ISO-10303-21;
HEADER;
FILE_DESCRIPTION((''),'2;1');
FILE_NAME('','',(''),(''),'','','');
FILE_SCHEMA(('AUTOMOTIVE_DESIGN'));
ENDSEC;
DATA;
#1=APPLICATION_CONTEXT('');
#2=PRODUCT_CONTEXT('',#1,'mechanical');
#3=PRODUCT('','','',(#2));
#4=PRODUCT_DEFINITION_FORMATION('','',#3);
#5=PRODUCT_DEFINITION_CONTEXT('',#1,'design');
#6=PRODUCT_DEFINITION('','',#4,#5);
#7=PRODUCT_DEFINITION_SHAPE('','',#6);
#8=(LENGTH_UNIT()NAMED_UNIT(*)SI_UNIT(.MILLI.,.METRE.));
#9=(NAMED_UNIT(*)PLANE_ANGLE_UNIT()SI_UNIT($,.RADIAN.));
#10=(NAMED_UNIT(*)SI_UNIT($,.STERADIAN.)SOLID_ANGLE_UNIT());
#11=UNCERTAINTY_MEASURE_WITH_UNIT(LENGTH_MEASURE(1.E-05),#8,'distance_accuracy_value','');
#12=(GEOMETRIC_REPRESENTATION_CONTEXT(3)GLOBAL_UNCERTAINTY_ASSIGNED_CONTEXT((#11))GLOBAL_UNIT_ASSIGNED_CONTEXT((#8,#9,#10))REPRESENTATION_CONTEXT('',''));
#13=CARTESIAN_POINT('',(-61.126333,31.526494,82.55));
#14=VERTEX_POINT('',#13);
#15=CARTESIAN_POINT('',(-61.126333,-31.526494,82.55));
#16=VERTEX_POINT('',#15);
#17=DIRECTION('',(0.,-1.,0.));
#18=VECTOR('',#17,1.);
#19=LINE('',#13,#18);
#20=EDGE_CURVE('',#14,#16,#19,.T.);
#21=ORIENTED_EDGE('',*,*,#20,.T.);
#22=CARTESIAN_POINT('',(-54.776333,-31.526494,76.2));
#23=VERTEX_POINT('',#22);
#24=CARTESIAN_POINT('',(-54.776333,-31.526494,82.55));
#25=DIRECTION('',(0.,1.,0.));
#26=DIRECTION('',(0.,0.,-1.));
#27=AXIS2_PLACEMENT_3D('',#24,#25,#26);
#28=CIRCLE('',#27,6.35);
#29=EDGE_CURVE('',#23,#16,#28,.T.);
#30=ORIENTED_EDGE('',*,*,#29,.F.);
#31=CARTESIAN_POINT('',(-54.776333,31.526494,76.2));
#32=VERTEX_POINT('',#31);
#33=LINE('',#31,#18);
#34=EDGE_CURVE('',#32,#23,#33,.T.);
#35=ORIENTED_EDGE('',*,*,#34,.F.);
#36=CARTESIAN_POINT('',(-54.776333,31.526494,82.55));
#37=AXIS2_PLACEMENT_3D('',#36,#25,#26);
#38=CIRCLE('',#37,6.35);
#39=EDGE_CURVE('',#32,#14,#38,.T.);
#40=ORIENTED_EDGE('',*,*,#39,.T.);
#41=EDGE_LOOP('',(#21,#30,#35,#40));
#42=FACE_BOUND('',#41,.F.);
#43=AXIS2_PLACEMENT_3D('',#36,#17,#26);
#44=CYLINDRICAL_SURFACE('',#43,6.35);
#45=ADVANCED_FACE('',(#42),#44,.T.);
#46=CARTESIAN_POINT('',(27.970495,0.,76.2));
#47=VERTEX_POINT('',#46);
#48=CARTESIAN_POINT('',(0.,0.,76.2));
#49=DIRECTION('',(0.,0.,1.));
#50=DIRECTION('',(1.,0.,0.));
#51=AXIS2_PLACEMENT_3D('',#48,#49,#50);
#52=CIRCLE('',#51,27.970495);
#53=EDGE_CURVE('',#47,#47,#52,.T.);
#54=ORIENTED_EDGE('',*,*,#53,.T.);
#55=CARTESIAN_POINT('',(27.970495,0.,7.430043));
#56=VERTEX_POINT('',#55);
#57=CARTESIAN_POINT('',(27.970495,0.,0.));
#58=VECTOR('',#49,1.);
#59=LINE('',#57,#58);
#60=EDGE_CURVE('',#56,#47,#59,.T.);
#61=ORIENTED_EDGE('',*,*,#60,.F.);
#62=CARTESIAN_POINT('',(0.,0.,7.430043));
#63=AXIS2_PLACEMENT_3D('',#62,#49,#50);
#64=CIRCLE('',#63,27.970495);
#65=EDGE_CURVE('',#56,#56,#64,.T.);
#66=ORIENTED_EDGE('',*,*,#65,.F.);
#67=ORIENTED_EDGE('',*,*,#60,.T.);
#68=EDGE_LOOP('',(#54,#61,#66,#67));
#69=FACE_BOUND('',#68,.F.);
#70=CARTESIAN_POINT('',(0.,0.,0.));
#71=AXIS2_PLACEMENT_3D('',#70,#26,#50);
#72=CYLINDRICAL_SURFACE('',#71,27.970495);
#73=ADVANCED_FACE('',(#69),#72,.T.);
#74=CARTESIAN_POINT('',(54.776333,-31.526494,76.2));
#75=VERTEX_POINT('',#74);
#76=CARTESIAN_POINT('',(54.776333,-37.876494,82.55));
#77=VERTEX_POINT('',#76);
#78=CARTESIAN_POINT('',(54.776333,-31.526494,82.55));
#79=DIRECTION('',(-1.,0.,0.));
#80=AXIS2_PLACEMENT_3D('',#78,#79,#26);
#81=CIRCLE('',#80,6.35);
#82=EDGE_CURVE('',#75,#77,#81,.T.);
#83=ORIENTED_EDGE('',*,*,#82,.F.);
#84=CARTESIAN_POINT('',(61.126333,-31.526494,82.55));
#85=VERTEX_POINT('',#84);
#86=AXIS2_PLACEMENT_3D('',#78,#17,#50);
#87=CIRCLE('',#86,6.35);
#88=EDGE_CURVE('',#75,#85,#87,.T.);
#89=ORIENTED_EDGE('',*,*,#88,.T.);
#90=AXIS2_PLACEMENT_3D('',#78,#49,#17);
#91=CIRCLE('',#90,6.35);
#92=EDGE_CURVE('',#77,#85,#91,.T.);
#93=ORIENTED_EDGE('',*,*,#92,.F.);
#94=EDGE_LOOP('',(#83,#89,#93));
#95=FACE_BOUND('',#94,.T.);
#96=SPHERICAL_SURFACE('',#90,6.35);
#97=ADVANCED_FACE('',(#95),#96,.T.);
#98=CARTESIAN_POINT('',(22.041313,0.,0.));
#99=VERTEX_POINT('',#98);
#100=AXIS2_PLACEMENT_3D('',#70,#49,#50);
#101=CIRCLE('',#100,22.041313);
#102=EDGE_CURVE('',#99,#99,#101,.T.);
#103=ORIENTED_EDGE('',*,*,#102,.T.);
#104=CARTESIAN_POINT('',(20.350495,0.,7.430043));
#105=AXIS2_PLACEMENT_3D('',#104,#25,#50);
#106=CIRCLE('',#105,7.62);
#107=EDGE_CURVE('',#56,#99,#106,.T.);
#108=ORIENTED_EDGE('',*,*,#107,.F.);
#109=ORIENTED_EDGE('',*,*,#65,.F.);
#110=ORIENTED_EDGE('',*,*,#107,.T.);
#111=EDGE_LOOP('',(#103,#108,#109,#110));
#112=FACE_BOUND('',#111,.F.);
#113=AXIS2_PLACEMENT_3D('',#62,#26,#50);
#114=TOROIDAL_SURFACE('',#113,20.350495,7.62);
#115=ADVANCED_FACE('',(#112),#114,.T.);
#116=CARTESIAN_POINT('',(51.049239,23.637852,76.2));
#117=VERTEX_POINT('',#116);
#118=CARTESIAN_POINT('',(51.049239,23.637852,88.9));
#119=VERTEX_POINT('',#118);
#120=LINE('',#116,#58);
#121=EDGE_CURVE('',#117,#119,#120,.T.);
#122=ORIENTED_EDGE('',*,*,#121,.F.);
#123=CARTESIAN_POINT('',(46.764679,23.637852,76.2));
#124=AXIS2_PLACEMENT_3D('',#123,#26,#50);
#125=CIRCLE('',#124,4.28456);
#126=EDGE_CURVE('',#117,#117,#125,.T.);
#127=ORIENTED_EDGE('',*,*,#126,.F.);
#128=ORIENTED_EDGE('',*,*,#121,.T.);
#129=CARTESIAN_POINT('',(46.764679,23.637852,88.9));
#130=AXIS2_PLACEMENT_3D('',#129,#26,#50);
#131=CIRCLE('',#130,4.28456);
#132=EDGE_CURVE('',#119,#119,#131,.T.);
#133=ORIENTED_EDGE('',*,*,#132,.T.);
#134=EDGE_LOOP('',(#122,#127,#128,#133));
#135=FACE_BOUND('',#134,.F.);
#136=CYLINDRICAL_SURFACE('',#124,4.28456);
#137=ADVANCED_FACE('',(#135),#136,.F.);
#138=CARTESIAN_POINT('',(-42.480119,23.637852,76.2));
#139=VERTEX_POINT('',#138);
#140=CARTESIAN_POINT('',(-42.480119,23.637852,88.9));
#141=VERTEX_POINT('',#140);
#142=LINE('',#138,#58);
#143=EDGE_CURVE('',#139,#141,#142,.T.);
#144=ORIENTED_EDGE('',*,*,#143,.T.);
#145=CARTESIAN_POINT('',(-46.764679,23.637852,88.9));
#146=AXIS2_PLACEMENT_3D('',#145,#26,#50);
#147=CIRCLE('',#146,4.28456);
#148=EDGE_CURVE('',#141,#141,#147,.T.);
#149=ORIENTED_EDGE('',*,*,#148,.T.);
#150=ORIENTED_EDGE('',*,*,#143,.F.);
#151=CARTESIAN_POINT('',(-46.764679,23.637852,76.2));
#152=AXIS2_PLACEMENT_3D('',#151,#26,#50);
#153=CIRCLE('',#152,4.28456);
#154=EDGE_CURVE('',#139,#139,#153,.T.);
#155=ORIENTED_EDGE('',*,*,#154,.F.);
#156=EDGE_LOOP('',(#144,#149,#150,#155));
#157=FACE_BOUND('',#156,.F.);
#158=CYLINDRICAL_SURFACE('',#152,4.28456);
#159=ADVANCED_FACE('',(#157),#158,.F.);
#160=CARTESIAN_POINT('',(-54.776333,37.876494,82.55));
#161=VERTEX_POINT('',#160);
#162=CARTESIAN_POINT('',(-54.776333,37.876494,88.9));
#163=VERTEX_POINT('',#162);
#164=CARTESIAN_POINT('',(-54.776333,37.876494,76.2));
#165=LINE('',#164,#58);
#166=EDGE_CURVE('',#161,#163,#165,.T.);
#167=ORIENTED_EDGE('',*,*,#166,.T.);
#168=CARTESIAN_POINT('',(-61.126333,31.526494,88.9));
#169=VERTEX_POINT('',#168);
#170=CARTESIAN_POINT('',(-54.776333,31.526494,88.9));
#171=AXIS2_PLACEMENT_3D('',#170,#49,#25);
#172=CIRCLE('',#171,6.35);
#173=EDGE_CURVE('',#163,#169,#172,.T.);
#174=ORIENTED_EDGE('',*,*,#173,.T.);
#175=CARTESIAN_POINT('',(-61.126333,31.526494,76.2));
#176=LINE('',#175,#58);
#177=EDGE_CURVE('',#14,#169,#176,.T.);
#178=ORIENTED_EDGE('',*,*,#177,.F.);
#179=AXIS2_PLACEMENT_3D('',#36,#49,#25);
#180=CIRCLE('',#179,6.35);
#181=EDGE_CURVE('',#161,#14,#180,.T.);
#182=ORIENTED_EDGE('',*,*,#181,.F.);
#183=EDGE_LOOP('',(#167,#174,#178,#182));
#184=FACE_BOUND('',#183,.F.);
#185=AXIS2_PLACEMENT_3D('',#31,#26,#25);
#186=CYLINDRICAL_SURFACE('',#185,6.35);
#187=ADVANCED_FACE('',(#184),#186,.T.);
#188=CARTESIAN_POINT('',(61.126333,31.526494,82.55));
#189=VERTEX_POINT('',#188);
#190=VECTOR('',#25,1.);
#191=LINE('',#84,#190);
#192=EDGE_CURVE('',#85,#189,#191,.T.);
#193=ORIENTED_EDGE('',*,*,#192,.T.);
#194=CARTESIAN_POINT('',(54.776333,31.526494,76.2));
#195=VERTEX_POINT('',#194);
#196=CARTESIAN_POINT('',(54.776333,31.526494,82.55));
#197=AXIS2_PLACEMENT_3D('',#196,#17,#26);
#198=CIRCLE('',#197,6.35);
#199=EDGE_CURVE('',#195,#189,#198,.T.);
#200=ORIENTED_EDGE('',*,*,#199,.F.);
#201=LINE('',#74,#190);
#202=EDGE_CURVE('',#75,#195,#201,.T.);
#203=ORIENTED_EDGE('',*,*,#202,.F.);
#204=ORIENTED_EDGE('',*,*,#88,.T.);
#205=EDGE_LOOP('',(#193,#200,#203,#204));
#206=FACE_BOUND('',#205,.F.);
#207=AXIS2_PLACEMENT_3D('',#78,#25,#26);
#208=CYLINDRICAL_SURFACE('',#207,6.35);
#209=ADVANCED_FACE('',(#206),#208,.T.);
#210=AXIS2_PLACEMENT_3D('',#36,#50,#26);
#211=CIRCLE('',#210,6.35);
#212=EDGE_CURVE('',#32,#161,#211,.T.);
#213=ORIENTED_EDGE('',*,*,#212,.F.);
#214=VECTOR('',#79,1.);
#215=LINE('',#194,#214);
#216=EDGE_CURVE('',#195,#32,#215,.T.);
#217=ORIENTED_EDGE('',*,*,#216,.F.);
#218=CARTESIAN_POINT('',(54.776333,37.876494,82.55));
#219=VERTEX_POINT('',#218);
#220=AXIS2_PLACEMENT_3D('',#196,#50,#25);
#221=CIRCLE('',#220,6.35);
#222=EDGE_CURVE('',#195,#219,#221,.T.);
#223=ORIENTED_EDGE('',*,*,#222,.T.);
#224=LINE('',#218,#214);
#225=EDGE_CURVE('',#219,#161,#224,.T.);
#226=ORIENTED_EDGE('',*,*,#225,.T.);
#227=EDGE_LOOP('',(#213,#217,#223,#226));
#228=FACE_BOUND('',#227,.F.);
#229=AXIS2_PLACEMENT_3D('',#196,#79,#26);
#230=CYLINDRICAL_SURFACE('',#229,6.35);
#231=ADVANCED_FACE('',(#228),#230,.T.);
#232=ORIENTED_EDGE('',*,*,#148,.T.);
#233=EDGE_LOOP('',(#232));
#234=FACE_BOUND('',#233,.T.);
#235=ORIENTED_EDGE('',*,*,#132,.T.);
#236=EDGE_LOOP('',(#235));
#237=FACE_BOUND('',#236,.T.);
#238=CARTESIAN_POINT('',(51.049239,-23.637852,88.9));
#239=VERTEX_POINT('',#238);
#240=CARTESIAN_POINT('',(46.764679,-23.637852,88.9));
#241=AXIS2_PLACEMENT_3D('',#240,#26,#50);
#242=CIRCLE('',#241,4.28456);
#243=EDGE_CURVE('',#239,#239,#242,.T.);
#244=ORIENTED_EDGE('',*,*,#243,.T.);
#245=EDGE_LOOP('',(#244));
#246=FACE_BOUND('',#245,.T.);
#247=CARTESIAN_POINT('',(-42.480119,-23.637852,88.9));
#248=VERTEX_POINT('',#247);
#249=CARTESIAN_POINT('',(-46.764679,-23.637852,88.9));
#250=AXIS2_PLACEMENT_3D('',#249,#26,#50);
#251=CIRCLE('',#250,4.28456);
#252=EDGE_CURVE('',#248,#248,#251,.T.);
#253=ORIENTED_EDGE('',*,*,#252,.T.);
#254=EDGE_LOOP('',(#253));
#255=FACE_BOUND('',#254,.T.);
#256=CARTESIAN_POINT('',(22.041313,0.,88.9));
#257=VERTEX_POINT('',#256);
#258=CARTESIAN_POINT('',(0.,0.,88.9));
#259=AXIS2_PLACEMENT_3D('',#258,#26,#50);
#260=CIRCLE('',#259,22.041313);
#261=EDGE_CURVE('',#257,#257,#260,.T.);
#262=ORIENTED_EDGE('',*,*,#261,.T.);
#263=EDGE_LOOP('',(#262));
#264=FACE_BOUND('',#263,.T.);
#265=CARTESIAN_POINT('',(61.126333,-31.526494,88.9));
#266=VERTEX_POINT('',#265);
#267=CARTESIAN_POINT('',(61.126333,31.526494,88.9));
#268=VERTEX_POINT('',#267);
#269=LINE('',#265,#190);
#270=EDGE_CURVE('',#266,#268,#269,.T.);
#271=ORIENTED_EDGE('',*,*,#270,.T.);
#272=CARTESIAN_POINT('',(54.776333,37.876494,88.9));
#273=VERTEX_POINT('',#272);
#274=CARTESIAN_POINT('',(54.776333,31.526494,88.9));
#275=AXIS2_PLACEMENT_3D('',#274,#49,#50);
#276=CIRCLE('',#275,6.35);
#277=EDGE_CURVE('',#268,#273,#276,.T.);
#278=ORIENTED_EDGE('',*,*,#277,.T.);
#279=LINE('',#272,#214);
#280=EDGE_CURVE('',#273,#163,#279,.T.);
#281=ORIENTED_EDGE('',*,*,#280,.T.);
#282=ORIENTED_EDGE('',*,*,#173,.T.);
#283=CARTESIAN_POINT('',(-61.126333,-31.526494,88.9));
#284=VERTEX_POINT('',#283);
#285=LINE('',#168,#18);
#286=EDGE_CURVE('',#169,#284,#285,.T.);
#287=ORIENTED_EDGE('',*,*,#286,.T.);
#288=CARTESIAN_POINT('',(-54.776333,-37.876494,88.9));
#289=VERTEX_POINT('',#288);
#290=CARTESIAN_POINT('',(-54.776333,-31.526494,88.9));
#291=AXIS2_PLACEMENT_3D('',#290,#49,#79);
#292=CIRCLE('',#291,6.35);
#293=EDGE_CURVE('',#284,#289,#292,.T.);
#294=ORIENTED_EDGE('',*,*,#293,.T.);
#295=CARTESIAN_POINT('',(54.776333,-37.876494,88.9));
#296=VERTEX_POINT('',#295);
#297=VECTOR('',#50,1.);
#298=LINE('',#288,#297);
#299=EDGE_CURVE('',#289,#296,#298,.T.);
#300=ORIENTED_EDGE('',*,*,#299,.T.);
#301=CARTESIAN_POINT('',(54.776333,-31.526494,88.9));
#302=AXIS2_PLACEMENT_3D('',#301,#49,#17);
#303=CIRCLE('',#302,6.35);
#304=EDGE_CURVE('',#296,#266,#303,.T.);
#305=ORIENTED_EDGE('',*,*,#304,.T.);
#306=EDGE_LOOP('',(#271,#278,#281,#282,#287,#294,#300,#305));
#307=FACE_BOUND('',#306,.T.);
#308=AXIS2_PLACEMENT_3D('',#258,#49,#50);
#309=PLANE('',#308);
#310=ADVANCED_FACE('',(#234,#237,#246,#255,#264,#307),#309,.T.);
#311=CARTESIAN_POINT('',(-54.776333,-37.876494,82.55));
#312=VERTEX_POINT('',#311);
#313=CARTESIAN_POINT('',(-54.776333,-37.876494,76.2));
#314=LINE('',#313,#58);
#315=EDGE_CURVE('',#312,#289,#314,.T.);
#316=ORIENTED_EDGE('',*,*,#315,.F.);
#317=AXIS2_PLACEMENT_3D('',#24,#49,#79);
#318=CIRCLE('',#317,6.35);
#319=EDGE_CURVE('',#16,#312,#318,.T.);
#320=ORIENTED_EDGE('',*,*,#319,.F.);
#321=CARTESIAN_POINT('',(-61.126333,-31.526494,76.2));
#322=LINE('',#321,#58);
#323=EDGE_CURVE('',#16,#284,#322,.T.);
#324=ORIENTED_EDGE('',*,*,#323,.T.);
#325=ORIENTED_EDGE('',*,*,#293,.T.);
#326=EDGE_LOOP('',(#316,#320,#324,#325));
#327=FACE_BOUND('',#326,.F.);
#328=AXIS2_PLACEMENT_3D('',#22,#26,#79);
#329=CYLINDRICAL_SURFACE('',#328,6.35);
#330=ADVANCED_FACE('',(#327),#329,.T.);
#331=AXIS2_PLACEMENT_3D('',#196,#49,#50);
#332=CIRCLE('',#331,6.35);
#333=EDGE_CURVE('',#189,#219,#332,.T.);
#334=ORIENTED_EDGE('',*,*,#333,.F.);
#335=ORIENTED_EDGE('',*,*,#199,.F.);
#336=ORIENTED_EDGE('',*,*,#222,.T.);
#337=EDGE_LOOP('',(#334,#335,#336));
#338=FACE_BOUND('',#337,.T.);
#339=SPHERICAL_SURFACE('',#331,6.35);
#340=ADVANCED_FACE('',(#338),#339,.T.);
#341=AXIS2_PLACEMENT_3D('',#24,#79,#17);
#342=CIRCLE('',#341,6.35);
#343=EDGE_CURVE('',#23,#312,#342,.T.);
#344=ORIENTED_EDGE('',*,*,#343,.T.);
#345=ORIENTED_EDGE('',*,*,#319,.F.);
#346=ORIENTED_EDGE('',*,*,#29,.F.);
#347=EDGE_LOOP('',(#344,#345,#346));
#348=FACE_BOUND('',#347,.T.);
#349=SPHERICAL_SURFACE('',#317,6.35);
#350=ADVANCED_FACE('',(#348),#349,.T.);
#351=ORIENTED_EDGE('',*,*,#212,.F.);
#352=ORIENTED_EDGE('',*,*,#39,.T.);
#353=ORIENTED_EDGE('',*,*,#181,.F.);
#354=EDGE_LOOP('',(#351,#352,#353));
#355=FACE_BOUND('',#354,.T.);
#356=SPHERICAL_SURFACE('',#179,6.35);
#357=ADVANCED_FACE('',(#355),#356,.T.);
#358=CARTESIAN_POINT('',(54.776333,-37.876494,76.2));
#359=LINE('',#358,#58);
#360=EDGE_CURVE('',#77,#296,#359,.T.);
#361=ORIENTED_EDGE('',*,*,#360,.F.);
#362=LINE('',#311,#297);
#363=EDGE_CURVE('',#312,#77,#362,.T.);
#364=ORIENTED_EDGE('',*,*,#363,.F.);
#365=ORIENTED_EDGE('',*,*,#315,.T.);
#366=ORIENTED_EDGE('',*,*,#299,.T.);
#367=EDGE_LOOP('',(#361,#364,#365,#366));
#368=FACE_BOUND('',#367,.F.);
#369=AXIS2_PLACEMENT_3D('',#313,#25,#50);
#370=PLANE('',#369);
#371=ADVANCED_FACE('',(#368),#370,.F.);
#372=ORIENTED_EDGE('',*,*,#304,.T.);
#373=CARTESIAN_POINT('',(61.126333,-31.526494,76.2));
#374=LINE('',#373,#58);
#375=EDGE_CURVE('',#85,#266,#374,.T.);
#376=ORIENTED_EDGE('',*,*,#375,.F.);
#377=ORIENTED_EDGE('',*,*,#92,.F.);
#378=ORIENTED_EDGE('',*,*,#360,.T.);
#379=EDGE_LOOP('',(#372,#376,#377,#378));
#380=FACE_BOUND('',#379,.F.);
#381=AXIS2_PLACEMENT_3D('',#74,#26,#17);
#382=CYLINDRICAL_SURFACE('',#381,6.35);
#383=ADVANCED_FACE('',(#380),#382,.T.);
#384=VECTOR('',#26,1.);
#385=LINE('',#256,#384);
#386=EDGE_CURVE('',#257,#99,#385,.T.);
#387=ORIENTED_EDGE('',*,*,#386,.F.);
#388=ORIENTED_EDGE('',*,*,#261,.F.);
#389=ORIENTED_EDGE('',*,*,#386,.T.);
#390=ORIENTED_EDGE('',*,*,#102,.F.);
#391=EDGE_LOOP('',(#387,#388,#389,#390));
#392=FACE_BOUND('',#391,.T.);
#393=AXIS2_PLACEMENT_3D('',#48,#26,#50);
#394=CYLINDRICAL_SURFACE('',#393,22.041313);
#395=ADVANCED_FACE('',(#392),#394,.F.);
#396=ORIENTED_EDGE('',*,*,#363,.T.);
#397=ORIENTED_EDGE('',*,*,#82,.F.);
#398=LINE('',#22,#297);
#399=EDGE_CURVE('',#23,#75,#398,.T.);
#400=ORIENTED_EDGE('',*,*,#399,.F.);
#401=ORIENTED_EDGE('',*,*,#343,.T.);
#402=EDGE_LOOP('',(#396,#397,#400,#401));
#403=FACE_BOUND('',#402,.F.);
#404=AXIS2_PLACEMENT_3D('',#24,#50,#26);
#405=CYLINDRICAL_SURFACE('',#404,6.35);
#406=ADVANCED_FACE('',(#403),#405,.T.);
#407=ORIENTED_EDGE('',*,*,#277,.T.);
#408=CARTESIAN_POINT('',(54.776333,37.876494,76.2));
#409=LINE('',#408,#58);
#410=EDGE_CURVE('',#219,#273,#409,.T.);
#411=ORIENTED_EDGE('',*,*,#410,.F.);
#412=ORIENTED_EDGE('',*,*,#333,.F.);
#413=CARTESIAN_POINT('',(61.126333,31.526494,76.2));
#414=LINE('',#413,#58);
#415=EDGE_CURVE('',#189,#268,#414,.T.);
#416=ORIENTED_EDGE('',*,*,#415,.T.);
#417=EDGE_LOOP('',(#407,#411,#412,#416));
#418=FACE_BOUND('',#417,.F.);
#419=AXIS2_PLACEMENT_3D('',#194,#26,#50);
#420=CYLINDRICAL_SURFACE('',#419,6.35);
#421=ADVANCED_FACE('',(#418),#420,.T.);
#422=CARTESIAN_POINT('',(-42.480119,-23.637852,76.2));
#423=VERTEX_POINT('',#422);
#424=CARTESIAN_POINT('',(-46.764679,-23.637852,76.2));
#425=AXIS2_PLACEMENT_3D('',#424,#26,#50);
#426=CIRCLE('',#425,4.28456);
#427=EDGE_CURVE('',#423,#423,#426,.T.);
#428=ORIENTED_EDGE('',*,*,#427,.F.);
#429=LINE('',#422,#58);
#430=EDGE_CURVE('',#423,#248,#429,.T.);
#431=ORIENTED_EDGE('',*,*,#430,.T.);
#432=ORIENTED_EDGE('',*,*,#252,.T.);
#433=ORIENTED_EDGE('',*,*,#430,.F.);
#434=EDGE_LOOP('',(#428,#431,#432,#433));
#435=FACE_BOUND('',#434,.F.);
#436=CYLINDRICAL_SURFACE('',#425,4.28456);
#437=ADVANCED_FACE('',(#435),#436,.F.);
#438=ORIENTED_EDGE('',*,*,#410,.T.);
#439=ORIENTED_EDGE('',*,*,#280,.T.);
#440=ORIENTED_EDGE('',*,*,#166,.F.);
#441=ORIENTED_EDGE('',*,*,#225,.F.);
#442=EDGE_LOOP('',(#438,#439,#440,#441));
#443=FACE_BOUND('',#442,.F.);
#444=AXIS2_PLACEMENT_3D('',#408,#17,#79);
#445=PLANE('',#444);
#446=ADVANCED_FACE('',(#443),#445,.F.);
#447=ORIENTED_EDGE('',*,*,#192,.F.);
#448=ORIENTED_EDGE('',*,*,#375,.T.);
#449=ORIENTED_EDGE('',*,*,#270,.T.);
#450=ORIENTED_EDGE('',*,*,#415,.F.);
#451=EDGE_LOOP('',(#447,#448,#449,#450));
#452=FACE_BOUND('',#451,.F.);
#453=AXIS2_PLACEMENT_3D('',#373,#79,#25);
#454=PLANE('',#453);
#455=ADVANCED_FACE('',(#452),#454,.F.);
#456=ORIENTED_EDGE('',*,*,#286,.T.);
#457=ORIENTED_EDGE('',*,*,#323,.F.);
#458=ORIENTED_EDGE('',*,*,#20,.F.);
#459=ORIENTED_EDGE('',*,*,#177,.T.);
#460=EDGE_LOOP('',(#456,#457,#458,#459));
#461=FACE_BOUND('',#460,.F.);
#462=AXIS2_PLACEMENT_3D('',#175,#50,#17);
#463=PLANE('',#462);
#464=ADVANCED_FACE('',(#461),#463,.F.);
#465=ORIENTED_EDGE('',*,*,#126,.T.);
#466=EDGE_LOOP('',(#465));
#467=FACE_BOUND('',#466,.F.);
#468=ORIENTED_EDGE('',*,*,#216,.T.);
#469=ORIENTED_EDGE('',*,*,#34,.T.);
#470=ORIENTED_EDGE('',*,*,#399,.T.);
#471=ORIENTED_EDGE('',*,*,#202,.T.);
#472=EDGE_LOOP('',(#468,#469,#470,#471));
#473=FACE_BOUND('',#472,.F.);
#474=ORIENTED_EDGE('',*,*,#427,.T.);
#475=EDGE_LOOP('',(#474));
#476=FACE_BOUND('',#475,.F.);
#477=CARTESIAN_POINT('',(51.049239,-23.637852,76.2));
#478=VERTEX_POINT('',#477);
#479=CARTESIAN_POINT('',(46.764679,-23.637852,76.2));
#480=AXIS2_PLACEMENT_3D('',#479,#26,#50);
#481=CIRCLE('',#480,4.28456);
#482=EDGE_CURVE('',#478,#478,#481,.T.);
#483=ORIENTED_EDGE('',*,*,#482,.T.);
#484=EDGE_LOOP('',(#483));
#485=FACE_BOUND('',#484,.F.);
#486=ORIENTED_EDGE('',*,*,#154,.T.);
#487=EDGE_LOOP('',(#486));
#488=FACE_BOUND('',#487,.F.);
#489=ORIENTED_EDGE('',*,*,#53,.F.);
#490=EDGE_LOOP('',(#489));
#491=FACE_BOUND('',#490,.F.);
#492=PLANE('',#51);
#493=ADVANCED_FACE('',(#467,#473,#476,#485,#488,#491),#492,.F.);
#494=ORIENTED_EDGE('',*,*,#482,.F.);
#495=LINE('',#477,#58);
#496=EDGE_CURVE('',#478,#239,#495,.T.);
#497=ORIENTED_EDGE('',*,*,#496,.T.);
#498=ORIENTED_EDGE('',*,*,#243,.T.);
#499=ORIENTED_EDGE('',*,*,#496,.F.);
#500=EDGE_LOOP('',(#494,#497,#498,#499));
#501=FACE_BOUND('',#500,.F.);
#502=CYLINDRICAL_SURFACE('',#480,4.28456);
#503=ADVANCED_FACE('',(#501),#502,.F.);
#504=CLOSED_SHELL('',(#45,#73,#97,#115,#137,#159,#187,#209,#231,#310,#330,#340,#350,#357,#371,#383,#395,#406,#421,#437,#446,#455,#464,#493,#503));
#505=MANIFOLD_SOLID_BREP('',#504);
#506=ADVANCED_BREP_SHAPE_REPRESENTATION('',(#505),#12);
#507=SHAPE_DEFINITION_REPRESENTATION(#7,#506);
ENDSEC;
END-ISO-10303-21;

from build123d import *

# Parameters (mm, degrees)
F0_R     = 27.9704951592
F0_R_2   = 22.0413133634
F1_DEPTH = 76.2
F3_DEPTH = 12.7
F5_R     = 6.35
F6_R     = 4.2845599963
F7_DEPTH = 25.4
F8_DEPTH = 25.4


# Not quite as in the source:
# - a fillet or chamfer that OpenCascade refuses, or shapes differently, is made with other operations: its cross-section is extruded or revolved along the edge and cut away or added


with BuildPart() as f1:
    # F0 (on Top) → F1 (new body)
    with BuildSketch(Plane.XY):
        Circle(F0_R)
        Circle(F0_R_2, mode=Mode.SUBTRACT)
    extrude(amount=F1_DEPTH)

    # F2 (on face) → F3 (join)
    with BuildSketch(Plane.XY.offset(76.2)):
        with BuildLine():
            Line((-54.7763327301, -37.8764942288), (54.7763327301, -37.8764942288))
            ThreePointArc((54.7763327301, -37.8764942288), (59.2664607906, -36.0166222894), (61.1263327301, -31.5264942288))
            Line((61.1263327301, -31.5264942288), (61.1263327301, 31.5264942288))
            ThreePointArc((61.1263327301, 31.5264942288), (59.2664607906, 36.0166222894), (54.7763327301, 37.8764942288))
            Line((54.7763327301, 37.8764942288), (-54.7763327301, 37.8764942288))
            ThreePointArc((-54.7763327301, 37.8764942288), (-59.2664607906, 36.0166222894), (-61.1263327301, 31.5264942288))
            Line((-61.1263327301, 31.5264942288), (-61.1263327301, -31.5264942288))
            ThreePointArc((-61.1263327301, -31.5264942288), (-59.2664607906, -36.0166222894), (-54.7763327301, -37.8764942288))
        make_face()
    extrude(amount=F3_DEPTH)

    # F4: fillet of radius 7.62 on 1 edges, made by hand

    # F4_s1 → F4_t2 (revolve, cut)
    with BuildSketch(Plane.XZ):
        with BuildLine():
            ThreePointArc((27.9704951592, 7.4300426513), (26.3065187789, 2.6771295823), (22.0413133634, 0))
            Line((22.0413133634, 0), (27.9704951592, 0))
            Line((27.9704951592, 0), (27.9704951592, 7.4300426513))
        make_face()
    revolve(axis=Axis((0, 0, 0), (0, 0, 1)), mode=Mode.SUBTRACT)

    # F5
    f5_edges = [f1.edges().sort_by_distance(p)[0] for p in [
        (-61.126333, 0, 76.2),
        (0, -37.876494, 76.2),
        (61.126333, 0, 76.2),
        (0, 37.876494, 76.2),
        (-59.266461, -36.016622, 76.2),
        (59.266461, -36.016622, 76.2),
        (-59.266461, 36.016622, 76.2),
        (59.266461, 36.016622, 76.2),
    ]]
    fillet(f5_edges, radius=F5_R)

    # F6 (on face) → F7 (cut)
    with BuildSketch(Plane(origin=(0, 0, 76.2), x_dir=(1, 0, 0), z_dir=(0, 0, -1))):
        with Locations((46.7646792531, -23.6378517002)):
            Circle(F6_R)
        with Locations((-46.7646792531, -23.6378517002)):
            Circle(F6_R)
        with Locations((46.7646792531, 23.6378517002)):
            Circle(F6_R)
        with Locations((-46.7646792531, 23.6378517002)):
            Circle(F6_R)
    extrude(amount=-F7_DEPTH, mode=Mode.SUBTRACT)

    # F8 (cut): a face of the model
    f8_faces = [f1.faces().sort_by_distance(p)[0] for p in [
        (0, 0, 76.2),
    ]]
    extrude(f8_faces, amount=-F8_DEPTH, mode=Mode.SUBTRACT)


solid = f1.part
